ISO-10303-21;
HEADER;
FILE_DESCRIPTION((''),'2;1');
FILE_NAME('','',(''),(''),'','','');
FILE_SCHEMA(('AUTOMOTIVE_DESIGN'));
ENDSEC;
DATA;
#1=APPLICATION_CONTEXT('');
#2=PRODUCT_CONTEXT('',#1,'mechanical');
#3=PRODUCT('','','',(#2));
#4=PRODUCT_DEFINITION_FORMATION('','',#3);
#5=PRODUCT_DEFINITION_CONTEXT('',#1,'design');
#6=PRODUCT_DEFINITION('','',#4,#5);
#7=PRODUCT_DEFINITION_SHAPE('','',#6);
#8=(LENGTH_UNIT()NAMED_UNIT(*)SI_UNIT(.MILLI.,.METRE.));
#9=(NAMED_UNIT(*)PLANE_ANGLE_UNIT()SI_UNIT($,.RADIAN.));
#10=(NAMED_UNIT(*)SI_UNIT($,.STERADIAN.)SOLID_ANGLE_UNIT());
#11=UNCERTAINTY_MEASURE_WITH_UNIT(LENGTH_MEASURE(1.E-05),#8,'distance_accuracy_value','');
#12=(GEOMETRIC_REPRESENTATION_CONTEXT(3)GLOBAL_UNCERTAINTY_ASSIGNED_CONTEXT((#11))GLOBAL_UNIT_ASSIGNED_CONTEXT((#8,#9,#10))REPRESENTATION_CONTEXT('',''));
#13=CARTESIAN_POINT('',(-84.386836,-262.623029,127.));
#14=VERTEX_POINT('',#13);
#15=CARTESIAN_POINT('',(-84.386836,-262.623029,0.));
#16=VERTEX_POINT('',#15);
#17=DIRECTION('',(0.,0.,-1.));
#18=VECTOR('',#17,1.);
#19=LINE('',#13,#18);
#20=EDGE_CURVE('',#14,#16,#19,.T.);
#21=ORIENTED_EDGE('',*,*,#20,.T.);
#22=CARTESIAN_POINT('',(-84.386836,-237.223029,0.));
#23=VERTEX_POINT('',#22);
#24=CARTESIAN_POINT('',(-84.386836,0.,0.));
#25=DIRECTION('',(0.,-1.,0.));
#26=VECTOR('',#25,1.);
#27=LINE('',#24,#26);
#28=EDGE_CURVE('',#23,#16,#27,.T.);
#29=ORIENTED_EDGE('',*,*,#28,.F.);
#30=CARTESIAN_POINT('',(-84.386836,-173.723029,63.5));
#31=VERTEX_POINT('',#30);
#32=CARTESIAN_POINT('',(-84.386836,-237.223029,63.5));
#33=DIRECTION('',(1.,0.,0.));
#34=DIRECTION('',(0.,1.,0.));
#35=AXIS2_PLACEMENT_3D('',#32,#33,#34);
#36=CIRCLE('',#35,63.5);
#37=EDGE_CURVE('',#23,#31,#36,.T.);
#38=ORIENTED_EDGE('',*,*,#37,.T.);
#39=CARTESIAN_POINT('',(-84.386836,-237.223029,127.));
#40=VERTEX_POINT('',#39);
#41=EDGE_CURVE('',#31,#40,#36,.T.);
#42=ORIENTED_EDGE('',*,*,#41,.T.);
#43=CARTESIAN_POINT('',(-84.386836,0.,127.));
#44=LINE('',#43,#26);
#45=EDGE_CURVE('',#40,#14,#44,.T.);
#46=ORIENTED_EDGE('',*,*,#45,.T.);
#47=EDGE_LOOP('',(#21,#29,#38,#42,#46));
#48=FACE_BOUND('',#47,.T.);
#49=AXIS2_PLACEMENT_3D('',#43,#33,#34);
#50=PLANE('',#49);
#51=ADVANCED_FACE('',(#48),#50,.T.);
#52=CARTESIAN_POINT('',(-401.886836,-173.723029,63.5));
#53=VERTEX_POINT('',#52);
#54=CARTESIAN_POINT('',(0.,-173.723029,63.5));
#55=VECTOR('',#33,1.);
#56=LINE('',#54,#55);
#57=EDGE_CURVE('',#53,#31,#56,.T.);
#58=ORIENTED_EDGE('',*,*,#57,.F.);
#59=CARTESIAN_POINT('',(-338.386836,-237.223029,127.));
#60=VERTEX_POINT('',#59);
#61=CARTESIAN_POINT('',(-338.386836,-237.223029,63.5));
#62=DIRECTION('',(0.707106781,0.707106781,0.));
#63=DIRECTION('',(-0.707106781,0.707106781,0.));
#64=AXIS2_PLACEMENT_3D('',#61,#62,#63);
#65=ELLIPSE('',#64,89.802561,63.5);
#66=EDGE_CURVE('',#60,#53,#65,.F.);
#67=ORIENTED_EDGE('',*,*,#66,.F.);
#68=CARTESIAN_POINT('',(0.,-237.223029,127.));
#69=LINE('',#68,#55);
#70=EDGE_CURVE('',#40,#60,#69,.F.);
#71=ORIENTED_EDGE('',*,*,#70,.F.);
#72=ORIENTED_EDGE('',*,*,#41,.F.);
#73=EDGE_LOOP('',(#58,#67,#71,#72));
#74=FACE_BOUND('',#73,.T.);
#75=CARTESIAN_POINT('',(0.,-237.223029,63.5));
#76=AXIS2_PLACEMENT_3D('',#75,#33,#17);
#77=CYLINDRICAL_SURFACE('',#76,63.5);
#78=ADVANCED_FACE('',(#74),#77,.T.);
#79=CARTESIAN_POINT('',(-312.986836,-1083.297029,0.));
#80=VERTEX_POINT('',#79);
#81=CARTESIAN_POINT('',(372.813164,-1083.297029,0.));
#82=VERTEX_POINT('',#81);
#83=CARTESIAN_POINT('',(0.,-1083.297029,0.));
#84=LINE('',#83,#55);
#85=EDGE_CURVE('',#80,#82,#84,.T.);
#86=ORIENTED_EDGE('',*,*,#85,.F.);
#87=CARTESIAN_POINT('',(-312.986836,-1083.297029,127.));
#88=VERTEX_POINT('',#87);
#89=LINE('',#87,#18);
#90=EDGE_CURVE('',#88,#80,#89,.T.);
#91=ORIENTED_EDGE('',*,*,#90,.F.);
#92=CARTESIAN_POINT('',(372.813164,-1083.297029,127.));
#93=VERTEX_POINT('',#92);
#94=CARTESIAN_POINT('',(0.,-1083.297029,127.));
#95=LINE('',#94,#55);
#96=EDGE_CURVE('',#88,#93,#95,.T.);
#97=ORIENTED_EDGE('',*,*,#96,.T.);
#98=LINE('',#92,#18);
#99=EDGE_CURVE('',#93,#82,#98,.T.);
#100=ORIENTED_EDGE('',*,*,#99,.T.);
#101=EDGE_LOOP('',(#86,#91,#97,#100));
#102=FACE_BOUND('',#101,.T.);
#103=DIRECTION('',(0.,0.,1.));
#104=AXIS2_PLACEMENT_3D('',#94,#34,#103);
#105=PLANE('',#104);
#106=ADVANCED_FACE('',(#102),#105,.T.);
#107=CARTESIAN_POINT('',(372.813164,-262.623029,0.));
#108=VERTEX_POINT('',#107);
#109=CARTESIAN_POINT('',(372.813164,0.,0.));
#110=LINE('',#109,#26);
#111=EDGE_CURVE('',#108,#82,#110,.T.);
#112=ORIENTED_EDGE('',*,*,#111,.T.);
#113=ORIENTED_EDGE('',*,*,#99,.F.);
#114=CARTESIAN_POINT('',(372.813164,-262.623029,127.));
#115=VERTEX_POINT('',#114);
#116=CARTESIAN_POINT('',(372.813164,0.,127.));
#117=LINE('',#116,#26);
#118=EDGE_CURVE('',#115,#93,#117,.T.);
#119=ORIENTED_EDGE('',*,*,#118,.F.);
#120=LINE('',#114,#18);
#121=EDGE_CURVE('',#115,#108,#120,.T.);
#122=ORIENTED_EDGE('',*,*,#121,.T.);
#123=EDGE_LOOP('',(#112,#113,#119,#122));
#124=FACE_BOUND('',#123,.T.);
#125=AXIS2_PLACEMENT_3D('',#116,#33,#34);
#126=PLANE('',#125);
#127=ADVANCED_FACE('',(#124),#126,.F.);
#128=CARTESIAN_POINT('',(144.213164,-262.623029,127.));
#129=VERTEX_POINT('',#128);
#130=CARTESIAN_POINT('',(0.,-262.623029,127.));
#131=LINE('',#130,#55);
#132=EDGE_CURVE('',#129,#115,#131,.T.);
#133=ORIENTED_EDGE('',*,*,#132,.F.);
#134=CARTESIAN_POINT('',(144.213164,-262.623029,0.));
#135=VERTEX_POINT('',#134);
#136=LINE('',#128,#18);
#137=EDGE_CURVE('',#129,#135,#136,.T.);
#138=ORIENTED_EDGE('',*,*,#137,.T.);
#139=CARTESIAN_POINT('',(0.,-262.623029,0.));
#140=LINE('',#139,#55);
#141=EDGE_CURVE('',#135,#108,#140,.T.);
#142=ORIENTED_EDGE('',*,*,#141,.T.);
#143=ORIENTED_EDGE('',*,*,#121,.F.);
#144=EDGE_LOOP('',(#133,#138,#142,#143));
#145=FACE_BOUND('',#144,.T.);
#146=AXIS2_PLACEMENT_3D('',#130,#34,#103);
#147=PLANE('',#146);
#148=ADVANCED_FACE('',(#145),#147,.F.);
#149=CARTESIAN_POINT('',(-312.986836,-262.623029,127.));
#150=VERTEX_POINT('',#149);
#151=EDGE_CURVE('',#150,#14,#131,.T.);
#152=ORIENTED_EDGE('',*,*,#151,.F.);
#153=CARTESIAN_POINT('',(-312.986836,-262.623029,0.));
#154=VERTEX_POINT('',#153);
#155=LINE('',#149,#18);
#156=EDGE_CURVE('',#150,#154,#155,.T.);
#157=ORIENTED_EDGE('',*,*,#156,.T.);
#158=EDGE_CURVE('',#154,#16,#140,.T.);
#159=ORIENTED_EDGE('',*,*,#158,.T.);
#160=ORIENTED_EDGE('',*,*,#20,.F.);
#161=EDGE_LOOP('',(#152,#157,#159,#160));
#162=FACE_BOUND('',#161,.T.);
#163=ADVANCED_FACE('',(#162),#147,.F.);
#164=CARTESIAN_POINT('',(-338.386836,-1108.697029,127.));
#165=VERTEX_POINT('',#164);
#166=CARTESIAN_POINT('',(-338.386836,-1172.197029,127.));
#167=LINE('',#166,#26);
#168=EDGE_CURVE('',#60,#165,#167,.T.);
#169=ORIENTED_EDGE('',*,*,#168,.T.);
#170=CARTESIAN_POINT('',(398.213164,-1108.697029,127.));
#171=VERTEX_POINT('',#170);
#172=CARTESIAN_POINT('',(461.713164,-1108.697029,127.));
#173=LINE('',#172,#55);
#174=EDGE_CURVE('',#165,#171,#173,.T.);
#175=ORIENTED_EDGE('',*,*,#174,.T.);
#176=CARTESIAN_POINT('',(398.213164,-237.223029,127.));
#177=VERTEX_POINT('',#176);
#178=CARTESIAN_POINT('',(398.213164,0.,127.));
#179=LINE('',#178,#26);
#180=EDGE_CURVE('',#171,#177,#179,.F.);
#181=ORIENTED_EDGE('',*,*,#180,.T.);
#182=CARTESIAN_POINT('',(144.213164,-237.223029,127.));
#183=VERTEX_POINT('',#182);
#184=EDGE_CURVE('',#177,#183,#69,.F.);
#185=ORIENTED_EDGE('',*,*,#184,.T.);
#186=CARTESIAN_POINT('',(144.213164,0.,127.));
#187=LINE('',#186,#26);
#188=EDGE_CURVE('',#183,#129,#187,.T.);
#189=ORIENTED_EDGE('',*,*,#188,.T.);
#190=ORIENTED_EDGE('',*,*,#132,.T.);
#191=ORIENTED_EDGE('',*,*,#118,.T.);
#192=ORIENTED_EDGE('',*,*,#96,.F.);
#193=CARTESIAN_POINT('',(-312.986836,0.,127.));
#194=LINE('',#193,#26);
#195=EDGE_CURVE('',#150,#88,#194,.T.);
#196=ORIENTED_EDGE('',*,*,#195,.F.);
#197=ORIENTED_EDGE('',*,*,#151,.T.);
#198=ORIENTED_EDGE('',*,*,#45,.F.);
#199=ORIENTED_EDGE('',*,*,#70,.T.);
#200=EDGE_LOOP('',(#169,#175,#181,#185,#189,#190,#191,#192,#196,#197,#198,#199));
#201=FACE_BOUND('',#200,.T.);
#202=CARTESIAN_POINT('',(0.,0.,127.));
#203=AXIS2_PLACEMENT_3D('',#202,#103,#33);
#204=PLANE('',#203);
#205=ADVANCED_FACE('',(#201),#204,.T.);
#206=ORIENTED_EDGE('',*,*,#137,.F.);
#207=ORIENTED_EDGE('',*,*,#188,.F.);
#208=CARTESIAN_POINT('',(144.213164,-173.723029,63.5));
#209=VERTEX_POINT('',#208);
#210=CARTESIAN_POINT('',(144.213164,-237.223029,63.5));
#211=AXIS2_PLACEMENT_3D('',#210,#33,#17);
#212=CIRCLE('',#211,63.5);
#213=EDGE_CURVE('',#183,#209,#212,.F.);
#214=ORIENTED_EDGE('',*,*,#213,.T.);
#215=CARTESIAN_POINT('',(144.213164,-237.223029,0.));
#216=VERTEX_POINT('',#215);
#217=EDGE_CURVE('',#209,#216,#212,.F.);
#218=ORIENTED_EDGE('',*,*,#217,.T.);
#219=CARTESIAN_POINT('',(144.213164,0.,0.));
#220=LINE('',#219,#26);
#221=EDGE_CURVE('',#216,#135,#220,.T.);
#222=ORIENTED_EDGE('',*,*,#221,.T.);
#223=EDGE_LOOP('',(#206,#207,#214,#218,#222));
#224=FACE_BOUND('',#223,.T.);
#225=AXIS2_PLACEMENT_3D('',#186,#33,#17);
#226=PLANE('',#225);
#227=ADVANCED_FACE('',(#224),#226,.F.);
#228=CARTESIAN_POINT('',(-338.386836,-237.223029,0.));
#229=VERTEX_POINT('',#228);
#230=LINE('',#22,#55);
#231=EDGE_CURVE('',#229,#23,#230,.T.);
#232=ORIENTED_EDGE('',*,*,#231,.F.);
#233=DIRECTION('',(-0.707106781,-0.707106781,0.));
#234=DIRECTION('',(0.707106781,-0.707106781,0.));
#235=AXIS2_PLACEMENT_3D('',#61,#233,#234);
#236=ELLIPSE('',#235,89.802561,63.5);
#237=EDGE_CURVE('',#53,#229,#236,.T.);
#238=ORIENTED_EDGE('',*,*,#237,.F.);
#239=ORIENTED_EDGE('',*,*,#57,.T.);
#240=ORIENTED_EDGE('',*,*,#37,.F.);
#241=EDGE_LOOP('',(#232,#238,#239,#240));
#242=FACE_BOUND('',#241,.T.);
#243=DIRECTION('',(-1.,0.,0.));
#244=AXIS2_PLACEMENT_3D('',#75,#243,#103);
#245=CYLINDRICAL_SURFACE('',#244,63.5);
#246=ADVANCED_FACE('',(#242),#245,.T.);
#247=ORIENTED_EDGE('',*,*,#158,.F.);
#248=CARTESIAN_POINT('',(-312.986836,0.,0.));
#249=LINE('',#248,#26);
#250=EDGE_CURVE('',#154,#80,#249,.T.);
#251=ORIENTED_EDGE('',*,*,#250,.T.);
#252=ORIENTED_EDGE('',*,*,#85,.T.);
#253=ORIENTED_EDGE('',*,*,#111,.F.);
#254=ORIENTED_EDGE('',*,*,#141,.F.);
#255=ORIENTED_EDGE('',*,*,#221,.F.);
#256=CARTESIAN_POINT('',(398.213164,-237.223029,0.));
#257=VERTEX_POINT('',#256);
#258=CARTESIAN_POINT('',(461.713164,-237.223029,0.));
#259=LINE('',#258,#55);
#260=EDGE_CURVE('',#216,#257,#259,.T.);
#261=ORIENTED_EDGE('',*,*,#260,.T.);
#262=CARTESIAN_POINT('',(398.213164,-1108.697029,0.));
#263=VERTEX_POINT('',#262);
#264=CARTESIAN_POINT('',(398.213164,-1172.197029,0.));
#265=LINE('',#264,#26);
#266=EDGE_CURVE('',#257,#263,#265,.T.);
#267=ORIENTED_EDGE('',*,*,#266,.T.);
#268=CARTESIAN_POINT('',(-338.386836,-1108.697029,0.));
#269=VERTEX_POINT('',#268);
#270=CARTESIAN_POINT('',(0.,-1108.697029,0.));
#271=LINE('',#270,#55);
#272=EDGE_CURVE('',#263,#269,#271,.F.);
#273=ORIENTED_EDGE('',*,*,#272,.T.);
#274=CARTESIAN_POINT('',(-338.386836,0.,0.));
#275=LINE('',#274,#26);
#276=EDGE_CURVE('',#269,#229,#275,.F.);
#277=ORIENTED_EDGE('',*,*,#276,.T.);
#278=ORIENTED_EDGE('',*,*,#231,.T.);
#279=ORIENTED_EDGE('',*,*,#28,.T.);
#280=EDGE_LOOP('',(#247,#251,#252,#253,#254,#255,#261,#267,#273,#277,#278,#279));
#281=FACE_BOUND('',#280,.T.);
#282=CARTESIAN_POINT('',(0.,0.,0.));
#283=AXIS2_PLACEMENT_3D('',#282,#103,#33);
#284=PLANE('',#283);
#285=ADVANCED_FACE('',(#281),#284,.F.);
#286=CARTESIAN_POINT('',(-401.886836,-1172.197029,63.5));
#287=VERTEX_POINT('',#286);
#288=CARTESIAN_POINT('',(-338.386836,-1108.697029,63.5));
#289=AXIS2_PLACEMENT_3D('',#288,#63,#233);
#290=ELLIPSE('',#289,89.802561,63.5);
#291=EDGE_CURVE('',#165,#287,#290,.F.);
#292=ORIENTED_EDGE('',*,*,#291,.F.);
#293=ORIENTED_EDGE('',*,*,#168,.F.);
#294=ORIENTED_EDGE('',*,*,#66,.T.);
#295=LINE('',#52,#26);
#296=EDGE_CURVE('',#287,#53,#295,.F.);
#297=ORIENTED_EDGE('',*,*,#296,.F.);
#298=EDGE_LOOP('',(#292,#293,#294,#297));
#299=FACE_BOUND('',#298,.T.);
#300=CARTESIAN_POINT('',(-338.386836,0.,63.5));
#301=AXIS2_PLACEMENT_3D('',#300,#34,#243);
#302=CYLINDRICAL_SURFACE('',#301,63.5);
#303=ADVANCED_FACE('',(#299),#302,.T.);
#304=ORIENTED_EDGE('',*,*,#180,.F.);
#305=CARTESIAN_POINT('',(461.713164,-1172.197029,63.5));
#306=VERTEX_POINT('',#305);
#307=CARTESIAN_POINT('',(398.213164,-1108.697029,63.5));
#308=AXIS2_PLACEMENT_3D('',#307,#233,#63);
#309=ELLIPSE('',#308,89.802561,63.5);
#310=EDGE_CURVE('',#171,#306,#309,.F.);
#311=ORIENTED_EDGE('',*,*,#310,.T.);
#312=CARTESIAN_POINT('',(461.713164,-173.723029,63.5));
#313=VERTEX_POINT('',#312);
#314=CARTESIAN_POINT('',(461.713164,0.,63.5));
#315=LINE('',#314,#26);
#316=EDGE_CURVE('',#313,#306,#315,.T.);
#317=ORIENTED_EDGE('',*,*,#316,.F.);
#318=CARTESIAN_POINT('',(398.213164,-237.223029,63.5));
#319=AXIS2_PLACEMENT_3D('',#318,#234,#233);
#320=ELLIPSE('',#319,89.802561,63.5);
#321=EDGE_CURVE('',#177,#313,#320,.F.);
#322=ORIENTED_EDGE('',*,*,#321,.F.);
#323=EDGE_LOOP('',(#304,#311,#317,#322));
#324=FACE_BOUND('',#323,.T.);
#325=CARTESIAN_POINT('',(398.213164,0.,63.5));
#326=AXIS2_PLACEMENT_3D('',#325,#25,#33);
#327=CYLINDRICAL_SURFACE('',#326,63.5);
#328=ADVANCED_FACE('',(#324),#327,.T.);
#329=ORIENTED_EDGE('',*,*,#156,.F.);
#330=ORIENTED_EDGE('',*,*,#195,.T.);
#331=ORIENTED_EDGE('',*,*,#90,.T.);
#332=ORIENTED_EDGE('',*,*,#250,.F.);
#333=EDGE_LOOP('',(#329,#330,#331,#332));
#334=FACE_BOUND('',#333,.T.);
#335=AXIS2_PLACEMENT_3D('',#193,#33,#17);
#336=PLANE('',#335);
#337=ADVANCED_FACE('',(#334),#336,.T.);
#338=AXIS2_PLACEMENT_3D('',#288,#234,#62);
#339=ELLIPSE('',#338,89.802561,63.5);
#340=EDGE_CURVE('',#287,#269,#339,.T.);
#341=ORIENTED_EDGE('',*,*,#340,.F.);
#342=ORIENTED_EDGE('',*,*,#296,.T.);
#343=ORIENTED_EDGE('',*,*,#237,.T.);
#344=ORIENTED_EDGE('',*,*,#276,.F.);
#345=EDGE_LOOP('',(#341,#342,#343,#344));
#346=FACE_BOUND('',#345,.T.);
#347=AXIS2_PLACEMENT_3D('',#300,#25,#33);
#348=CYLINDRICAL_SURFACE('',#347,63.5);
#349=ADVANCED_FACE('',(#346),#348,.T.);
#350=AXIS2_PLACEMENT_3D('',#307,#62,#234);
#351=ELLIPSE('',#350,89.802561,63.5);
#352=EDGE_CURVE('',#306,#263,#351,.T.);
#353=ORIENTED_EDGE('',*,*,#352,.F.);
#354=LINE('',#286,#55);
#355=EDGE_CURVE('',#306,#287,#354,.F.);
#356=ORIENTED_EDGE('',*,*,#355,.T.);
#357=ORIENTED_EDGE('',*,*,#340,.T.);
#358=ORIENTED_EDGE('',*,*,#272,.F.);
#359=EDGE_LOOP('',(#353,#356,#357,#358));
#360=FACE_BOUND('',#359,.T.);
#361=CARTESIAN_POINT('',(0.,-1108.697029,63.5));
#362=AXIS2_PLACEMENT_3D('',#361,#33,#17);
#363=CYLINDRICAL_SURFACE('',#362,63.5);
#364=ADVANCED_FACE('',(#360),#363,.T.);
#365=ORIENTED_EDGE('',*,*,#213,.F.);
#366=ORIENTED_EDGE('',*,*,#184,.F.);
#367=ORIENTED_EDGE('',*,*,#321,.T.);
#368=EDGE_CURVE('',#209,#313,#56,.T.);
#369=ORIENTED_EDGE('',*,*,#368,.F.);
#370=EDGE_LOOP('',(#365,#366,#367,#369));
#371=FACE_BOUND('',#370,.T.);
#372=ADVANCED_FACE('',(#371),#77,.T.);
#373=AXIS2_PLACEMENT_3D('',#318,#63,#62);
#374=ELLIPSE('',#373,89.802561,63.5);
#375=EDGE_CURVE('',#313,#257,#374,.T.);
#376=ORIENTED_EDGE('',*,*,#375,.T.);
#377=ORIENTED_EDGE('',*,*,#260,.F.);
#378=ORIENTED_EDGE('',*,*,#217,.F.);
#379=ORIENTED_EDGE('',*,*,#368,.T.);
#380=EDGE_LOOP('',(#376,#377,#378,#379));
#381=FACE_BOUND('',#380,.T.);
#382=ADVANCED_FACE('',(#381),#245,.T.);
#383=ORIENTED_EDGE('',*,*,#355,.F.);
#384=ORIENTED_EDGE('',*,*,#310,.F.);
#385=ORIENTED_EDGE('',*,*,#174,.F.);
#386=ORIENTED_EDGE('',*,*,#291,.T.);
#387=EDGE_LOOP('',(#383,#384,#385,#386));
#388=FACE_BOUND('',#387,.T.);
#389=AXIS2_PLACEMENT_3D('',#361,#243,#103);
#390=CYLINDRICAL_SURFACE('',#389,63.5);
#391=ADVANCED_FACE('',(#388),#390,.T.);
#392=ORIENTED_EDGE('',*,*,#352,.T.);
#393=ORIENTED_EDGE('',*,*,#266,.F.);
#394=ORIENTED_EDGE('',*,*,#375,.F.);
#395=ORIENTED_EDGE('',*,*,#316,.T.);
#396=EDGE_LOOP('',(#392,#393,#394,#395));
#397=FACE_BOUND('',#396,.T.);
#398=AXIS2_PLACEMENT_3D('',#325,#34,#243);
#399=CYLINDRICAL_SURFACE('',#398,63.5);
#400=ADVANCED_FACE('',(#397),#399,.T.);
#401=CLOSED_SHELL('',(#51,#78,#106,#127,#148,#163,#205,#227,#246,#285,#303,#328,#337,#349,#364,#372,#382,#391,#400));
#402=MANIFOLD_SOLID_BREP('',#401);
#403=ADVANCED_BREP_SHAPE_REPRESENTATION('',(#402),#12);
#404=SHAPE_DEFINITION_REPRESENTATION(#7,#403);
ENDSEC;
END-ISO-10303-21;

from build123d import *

# Parameters (mm, degrees)
BOSS_EXTRUDE1_DEPTH = 127
FILLET2_R           = 63.5


with BuildPart() as part:
    # Sketch1 → Boss-Extrude1 (new body)
    with BuildSketch(Plane.XY):
        Polygon((-84.386835568, -262.623028831), (-84.386835568, -173.723028831), (-401.886835568, -173.723028831), (-401.886835568, -1172.197028831), (461.713164432, -1172.197028831), (461.713164432, -173.723028831), (144.213164432, -173.723028831), (144.213164432, -262.623028831), (372.813164432, -262.623028831), (372.813164432, -1083.297028831), (-312.986835568, -1083.297028831), (-312.986835568, -262.623028831), align=None)
    extrude(amount=BOSS_EXTRUDE1_DEPTH)

    # Fillet2
    fillet2_edges = [part.edges().sort_by_distance(p)[0] for p in [
        (302.963164432, -173.723028831, 0),
        (302.963164432, -173.723028831, 127),
        (-243.136835568, -173.723028831, 0),
        (-243.136835568, -173.723028831, 127),
        (-401.886835568, -672.960028831, 127),
        (-401.886835568, -672.960028831, 0),
        (461.713164432, -672.960028831, 127),
        (461.713164432, -672.960028831, 0),
        (29.913164432, -1172.197028831, 0),
        (29.913164432, -1172.197028831, 127),
    ]]
    fillet(fillet2_edges, radius=FILLET2_R - 0.0001)  # a hair under: the kernel refuses the full size


solid = part.part
